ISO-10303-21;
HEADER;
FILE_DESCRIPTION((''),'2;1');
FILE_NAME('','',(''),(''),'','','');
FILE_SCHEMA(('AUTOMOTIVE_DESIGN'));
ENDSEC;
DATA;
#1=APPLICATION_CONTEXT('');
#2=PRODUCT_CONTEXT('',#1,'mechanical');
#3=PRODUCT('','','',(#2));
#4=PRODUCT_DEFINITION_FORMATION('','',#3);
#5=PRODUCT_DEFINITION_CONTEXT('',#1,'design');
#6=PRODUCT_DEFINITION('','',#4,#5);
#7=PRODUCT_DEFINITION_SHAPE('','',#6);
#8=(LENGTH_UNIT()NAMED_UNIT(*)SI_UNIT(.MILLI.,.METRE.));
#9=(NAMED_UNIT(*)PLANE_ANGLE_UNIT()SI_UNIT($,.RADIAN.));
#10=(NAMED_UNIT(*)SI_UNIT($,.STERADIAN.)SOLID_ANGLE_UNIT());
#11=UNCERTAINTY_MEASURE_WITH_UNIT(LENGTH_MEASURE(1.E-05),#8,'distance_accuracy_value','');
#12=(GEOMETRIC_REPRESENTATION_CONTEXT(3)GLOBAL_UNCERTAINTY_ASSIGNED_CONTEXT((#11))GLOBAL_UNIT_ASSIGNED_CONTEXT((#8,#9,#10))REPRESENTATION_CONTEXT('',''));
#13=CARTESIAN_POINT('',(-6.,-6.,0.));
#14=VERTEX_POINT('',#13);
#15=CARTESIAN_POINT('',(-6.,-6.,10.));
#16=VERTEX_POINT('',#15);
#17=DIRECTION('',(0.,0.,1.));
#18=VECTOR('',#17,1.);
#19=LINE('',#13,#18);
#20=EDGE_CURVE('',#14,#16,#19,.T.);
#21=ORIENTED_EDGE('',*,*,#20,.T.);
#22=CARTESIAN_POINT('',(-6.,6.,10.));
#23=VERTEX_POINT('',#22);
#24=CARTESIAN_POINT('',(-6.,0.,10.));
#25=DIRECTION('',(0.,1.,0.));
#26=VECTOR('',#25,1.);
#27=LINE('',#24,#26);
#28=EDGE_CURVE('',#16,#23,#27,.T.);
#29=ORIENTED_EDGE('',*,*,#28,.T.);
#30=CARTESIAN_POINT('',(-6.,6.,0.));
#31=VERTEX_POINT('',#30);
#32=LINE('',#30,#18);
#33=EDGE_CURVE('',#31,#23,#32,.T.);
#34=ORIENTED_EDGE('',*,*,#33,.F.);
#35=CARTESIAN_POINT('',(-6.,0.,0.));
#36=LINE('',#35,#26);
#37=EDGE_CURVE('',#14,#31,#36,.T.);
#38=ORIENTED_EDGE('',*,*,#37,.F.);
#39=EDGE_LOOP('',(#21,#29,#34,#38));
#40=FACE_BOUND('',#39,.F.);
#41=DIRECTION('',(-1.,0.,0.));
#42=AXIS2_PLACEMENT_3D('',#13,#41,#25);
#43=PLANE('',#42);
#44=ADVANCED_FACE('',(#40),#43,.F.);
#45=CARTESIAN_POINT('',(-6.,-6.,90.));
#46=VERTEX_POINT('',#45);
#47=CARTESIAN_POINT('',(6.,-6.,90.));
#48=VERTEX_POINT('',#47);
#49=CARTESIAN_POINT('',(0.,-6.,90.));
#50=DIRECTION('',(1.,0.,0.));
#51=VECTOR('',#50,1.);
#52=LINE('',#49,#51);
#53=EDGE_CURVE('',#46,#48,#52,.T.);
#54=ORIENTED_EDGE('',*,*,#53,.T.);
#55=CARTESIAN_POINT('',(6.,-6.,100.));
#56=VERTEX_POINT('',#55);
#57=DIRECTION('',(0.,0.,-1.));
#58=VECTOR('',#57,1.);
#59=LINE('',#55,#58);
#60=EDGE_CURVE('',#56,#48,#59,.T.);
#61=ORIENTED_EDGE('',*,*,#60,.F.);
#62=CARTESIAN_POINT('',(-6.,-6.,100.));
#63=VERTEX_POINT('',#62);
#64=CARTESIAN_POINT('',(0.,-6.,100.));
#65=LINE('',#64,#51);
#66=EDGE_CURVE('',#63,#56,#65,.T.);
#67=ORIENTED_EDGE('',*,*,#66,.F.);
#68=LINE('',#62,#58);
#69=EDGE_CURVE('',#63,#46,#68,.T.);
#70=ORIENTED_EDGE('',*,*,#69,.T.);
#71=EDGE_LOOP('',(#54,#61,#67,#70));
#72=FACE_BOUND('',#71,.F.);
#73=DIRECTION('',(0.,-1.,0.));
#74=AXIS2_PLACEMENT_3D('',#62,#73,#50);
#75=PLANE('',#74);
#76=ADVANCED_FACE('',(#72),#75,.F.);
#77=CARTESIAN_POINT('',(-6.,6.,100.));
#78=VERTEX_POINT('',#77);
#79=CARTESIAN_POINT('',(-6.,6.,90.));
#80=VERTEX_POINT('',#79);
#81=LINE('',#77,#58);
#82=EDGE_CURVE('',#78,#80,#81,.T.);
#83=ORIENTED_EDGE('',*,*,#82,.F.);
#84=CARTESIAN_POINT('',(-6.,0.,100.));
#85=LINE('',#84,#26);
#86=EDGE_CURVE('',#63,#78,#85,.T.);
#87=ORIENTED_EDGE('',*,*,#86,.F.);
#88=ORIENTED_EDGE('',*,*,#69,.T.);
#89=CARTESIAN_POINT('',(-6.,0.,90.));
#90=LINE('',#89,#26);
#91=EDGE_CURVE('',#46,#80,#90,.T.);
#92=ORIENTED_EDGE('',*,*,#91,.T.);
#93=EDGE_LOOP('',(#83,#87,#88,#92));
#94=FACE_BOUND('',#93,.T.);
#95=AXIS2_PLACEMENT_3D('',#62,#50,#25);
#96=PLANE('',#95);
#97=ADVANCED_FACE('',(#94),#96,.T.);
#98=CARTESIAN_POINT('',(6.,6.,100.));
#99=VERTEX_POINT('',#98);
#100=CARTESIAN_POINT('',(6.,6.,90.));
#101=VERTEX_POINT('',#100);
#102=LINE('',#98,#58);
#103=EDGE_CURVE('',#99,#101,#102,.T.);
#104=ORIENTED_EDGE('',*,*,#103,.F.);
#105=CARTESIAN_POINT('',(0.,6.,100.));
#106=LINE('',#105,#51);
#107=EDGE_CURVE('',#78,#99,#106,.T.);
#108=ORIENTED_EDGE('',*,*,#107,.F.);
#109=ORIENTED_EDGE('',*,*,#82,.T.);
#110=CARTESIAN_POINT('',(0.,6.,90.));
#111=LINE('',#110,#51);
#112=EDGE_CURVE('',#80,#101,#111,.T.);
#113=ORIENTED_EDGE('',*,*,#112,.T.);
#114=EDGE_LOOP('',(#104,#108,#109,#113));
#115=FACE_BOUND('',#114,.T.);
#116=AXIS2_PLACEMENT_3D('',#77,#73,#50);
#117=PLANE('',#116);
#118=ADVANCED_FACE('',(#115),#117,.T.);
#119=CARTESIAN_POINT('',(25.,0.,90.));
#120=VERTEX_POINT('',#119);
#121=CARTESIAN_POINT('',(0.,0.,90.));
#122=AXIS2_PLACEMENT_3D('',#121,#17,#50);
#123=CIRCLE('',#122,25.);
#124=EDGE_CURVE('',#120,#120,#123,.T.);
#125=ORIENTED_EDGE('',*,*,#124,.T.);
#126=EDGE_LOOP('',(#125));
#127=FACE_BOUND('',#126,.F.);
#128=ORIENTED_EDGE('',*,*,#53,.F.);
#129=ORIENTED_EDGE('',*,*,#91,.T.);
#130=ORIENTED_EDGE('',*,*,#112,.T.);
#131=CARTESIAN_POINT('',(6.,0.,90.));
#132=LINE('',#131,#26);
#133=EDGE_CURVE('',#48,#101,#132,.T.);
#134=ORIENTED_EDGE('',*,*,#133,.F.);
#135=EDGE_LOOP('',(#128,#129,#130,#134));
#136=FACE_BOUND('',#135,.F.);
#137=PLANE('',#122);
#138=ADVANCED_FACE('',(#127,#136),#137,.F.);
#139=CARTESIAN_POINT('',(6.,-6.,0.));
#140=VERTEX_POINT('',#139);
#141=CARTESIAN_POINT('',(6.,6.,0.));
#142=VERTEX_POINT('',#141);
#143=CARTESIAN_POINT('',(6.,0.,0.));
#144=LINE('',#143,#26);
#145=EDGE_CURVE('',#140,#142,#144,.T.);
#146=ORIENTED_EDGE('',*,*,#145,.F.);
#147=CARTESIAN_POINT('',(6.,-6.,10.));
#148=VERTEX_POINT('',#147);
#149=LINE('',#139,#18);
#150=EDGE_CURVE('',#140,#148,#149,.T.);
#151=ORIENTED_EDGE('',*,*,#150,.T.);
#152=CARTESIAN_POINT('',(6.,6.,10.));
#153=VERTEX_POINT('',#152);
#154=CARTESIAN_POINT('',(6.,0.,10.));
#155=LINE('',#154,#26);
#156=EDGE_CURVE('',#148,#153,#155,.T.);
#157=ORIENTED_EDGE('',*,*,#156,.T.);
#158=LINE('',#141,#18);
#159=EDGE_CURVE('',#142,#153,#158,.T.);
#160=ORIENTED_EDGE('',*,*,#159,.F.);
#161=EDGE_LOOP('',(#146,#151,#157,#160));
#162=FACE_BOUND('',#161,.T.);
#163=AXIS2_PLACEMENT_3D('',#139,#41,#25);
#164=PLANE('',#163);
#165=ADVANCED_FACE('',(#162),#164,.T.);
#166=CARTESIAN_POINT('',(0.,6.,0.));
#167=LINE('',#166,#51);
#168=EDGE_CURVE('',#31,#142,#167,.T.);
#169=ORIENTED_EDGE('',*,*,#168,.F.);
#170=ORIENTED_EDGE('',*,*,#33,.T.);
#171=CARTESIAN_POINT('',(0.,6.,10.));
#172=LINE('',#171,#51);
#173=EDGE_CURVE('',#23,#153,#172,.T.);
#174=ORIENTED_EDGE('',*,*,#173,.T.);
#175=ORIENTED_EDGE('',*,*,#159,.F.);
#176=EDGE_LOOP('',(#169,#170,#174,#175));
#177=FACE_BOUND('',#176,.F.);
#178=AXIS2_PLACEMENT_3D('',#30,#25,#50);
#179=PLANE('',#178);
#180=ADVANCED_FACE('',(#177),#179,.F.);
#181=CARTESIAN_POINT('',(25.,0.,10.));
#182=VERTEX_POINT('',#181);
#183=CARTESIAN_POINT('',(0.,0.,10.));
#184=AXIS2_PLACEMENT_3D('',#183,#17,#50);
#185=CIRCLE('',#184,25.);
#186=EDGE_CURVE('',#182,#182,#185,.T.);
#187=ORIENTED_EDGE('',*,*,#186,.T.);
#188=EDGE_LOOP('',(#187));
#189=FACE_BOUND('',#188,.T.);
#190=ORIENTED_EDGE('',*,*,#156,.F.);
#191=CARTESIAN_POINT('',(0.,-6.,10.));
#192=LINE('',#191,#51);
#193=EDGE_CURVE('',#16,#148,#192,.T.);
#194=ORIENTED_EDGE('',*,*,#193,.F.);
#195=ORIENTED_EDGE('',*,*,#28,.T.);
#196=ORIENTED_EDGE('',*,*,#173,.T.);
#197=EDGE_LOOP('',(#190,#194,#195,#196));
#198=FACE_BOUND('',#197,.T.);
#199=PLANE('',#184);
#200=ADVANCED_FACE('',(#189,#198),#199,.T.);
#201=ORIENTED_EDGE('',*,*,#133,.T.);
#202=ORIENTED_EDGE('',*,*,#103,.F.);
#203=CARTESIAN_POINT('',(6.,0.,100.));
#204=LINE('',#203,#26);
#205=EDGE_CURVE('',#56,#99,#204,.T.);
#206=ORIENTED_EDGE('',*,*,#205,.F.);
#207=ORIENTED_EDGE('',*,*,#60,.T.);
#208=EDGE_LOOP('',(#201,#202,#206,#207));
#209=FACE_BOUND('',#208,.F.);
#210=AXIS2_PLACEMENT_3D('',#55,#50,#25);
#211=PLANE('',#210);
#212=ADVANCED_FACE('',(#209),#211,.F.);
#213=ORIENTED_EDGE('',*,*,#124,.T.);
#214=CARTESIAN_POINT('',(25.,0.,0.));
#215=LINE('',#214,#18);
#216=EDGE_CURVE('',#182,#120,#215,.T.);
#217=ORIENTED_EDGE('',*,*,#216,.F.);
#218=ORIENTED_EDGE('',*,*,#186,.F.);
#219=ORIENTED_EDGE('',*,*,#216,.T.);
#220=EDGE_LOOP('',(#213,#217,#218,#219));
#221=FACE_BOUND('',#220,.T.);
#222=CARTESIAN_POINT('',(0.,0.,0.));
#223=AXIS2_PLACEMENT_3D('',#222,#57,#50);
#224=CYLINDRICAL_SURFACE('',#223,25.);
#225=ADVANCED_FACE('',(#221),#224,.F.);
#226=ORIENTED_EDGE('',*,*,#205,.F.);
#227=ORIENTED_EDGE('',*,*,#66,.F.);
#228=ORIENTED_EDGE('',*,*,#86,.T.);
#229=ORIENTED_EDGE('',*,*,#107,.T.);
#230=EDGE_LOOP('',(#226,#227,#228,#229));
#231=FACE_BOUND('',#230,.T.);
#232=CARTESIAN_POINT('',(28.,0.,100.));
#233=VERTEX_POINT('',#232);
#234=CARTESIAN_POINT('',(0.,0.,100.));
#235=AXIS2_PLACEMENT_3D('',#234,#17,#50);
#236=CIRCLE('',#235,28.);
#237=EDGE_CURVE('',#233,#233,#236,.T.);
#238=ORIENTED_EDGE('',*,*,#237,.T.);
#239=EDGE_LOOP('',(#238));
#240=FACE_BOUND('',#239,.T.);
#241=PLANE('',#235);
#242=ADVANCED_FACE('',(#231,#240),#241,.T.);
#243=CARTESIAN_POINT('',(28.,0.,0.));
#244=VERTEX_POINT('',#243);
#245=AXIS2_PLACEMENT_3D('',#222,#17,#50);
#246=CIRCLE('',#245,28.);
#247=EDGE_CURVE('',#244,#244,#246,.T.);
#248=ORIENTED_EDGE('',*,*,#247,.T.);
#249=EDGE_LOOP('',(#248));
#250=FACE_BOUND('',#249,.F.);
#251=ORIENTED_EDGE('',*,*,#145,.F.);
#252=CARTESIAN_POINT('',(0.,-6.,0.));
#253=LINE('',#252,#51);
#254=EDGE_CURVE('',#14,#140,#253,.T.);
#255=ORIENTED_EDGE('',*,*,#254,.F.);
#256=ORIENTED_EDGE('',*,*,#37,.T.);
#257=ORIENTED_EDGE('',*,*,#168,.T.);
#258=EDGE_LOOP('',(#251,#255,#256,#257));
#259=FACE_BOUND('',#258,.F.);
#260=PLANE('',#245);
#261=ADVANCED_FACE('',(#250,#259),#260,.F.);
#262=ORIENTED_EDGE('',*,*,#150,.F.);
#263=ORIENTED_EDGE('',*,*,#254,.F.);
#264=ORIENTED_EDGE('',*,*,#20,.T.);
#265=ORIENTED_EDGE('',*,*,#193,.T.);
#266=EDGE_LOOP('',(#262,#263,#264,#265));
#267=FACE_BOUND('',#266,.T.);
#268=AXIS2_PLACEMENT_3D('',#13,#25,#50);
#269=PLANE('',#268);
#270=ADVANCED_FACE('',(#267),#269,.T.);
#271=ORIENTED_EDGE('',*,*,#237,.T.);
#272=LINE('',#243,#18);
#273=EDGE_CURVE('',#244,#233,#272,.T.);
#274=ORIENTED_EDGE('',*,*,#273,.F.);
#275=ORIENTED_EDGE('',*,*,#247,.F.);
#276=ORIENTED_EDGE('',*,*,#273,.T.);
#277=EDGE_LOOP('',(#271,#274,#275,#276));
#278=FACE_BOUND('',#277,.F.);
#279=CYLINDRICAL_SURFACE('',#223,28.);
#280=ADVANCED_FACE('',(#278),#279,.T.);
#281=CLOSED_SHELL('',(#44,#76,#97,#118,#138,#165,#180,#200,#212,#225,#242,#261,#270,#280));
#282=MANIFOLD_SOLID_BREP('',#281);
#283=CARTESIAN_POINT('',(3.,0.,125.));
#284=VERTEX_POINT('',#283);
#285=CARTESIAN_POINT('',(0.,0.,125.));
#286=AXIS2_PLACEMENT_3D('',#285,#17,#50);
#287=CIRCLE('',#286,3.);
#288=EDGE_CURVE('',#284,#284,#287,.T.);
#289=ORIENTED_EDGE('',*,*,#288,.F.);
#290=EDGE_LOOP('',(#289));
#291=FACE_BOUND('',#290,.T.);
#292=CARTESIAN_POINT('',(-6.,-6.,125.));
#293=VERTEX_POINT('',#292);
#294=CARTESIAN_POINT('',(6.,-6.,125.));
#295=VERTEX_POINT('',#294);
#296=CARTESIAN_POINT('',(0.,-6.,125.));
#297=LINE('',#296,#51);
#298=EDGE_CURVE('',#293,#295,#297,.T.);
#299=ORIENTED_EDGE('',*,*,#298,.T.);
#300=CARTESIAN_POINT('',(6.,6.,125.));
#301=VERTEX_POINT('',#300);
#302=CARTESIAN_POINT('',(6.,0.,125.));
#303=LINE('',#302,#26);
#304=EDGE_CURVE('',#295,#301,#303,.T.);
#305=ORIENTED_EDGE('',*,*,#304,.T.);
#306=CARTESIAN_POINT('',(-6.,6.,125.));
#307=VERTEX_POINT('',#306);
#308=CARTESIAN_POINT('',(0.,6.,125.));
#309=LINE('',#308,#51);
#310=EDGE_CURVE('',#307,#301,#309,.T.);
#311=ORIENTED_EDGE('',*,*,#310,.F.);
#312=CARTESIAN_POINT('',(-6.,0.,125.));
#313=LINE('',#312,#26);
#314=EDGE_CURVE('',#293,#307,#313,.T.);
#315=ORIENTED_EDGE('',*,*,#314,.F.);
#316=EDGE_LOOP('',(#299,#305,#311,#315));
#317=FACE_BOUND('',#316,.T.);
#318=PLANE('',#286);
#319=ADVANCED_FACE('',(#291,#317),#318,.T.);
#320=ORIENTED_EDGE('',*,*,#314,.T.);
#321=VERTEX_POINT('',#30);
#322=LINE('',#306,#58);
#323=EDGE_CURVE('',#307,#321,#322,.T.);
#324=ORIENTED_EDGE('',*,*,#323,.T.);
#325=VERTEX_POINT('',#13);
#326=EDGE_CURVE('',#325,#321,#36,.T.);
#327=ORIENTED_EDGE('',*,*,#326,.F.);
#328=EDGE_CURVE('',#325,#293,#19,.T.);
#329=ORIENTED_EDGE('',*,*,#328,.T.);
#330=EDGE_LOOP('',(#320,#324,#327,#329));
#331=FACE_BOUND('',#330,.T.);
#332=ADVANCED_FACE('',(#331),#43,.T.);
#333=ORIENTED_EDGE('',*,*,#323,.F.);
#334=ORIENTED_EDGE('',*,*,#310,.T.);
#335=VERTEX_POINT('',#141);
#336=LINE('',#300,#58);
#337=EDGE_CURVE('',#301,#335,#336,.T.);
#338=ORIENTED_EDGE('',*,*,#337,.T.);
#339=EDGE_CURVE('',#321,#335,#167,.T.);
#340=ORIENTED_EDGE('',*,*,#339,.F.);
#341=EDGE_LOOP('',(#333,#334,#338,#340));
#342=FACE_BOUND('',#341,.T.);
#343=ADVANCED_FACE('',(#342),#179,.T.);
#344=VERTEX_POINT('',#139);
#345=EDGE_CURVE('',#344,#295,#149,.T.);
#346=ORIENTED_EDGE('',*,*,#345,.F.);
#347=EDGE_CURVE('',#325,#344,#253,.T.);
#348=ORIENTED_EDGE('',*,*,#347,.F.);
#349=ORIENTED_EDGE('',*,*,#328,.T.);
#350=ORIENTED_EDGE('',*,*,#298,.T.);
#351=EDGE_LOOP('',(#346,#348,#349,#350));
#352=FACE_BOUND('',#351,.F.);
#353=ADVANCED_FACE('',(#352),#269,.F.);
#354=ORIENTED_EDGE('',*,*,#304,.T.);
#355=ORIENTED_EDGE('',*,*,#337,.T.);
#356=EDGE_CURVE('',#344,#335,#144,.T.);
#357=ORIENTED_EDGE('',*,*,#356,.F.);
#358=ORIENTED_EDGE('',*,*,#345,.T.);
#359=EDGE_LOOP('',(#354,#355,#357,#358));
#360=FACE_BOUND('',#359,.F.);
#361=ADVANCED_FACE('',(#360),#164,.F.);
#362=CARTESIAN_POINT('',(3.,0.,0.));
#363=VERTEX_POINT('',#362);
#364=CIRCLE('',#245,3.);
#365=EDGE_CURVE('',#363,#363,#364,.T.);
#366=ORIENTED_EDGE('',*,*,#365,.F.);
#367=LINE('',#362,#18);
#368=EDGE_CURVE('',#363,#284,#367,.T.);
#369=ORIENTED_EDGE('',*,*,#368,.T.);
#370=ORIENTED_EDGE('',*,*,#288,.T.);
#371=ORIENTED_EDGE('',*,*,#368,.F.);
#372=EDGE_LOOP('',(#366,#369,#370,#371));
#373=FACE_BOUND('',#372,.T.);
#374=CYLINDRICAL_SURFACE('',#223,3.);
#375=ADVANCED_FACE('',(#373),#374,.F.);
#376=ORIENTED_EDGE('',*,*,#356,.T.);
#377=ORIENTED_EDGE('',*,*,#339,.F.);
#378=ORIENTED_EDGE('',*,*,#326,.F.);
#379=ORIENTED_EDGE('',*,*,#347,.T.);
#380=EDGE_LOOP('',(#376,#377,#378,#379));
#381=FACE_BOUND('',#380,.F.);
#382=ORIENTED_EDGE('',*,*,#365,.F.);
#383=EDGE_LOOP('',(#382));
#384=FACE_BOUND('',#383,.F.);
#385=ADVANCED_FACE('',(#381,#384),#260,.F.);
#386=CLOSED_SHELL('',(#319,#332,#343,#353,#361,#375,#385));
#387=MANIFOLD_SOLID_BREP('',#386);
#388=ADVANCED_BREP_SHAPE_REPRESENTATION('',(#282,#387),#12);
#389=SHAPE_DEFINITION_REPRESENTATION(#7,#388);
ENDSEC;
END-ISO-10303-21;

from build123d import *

# Parameters (mm, degrees)
F0_R     = 28
F0_R_2   = 25
F1_DEPTH = 100
F0_W     = 12
F0_H     = 12
F2_DEPTH = 10
F3_R     = 25
F3_W     = 12
F3_H     = 12
F4_DEPTH = 10
F0_R_3   = 3
F5_DEPTH = 10
F6_DEPTH = 125


with BuildPart() as f1:
    # F0 (on Top) → F1 (new body)
    with BuildSketch(Plane.XY):
        Circle(F0_R)
        Circle(F0_R_2, mode=Mode.SUBTRACT)
    extrude(amount=F1_DEPTH)

    # F0 (on Top) → F2 (join)
    with BuildSketch(Plane.XY):
        Circle(F0_R_2)
        Rectangle(F0_W, F0_H, mode=Mode.SUBTRACT)
    extrude(amount=F2_DEPTH)

    # F3 (on face) → F4 (join)
    with BuildSketch(Plane.XY.offset(100)):
        Circle(F3_R)
        Rectangle(F3_W, F3_H, mode=Mode.SUBTRACT)
    extrude(amount=-F4_DEPTH)


with BuildPart() as f5:
    # F0 (on Top) → F5 (new body)
    with BuildSketch(Plane.XY):
        Rectangle(F0_W, F0_H)
        Circle(F0_R_3, mode=Mode.SUBTRACT)
    extrude(amount=F5_DEPTH)

    # F0 (on Top) → F6 (join)
    with BuildSketch(Plane.XY):
        Rectangle(F0_W, F0_H)
        Circle(F0_R_3, mode=Mode.SUBTRACT)
    extrude(amount=F6_DEPTH)


solid = Compound([f1.part, f5.part])
